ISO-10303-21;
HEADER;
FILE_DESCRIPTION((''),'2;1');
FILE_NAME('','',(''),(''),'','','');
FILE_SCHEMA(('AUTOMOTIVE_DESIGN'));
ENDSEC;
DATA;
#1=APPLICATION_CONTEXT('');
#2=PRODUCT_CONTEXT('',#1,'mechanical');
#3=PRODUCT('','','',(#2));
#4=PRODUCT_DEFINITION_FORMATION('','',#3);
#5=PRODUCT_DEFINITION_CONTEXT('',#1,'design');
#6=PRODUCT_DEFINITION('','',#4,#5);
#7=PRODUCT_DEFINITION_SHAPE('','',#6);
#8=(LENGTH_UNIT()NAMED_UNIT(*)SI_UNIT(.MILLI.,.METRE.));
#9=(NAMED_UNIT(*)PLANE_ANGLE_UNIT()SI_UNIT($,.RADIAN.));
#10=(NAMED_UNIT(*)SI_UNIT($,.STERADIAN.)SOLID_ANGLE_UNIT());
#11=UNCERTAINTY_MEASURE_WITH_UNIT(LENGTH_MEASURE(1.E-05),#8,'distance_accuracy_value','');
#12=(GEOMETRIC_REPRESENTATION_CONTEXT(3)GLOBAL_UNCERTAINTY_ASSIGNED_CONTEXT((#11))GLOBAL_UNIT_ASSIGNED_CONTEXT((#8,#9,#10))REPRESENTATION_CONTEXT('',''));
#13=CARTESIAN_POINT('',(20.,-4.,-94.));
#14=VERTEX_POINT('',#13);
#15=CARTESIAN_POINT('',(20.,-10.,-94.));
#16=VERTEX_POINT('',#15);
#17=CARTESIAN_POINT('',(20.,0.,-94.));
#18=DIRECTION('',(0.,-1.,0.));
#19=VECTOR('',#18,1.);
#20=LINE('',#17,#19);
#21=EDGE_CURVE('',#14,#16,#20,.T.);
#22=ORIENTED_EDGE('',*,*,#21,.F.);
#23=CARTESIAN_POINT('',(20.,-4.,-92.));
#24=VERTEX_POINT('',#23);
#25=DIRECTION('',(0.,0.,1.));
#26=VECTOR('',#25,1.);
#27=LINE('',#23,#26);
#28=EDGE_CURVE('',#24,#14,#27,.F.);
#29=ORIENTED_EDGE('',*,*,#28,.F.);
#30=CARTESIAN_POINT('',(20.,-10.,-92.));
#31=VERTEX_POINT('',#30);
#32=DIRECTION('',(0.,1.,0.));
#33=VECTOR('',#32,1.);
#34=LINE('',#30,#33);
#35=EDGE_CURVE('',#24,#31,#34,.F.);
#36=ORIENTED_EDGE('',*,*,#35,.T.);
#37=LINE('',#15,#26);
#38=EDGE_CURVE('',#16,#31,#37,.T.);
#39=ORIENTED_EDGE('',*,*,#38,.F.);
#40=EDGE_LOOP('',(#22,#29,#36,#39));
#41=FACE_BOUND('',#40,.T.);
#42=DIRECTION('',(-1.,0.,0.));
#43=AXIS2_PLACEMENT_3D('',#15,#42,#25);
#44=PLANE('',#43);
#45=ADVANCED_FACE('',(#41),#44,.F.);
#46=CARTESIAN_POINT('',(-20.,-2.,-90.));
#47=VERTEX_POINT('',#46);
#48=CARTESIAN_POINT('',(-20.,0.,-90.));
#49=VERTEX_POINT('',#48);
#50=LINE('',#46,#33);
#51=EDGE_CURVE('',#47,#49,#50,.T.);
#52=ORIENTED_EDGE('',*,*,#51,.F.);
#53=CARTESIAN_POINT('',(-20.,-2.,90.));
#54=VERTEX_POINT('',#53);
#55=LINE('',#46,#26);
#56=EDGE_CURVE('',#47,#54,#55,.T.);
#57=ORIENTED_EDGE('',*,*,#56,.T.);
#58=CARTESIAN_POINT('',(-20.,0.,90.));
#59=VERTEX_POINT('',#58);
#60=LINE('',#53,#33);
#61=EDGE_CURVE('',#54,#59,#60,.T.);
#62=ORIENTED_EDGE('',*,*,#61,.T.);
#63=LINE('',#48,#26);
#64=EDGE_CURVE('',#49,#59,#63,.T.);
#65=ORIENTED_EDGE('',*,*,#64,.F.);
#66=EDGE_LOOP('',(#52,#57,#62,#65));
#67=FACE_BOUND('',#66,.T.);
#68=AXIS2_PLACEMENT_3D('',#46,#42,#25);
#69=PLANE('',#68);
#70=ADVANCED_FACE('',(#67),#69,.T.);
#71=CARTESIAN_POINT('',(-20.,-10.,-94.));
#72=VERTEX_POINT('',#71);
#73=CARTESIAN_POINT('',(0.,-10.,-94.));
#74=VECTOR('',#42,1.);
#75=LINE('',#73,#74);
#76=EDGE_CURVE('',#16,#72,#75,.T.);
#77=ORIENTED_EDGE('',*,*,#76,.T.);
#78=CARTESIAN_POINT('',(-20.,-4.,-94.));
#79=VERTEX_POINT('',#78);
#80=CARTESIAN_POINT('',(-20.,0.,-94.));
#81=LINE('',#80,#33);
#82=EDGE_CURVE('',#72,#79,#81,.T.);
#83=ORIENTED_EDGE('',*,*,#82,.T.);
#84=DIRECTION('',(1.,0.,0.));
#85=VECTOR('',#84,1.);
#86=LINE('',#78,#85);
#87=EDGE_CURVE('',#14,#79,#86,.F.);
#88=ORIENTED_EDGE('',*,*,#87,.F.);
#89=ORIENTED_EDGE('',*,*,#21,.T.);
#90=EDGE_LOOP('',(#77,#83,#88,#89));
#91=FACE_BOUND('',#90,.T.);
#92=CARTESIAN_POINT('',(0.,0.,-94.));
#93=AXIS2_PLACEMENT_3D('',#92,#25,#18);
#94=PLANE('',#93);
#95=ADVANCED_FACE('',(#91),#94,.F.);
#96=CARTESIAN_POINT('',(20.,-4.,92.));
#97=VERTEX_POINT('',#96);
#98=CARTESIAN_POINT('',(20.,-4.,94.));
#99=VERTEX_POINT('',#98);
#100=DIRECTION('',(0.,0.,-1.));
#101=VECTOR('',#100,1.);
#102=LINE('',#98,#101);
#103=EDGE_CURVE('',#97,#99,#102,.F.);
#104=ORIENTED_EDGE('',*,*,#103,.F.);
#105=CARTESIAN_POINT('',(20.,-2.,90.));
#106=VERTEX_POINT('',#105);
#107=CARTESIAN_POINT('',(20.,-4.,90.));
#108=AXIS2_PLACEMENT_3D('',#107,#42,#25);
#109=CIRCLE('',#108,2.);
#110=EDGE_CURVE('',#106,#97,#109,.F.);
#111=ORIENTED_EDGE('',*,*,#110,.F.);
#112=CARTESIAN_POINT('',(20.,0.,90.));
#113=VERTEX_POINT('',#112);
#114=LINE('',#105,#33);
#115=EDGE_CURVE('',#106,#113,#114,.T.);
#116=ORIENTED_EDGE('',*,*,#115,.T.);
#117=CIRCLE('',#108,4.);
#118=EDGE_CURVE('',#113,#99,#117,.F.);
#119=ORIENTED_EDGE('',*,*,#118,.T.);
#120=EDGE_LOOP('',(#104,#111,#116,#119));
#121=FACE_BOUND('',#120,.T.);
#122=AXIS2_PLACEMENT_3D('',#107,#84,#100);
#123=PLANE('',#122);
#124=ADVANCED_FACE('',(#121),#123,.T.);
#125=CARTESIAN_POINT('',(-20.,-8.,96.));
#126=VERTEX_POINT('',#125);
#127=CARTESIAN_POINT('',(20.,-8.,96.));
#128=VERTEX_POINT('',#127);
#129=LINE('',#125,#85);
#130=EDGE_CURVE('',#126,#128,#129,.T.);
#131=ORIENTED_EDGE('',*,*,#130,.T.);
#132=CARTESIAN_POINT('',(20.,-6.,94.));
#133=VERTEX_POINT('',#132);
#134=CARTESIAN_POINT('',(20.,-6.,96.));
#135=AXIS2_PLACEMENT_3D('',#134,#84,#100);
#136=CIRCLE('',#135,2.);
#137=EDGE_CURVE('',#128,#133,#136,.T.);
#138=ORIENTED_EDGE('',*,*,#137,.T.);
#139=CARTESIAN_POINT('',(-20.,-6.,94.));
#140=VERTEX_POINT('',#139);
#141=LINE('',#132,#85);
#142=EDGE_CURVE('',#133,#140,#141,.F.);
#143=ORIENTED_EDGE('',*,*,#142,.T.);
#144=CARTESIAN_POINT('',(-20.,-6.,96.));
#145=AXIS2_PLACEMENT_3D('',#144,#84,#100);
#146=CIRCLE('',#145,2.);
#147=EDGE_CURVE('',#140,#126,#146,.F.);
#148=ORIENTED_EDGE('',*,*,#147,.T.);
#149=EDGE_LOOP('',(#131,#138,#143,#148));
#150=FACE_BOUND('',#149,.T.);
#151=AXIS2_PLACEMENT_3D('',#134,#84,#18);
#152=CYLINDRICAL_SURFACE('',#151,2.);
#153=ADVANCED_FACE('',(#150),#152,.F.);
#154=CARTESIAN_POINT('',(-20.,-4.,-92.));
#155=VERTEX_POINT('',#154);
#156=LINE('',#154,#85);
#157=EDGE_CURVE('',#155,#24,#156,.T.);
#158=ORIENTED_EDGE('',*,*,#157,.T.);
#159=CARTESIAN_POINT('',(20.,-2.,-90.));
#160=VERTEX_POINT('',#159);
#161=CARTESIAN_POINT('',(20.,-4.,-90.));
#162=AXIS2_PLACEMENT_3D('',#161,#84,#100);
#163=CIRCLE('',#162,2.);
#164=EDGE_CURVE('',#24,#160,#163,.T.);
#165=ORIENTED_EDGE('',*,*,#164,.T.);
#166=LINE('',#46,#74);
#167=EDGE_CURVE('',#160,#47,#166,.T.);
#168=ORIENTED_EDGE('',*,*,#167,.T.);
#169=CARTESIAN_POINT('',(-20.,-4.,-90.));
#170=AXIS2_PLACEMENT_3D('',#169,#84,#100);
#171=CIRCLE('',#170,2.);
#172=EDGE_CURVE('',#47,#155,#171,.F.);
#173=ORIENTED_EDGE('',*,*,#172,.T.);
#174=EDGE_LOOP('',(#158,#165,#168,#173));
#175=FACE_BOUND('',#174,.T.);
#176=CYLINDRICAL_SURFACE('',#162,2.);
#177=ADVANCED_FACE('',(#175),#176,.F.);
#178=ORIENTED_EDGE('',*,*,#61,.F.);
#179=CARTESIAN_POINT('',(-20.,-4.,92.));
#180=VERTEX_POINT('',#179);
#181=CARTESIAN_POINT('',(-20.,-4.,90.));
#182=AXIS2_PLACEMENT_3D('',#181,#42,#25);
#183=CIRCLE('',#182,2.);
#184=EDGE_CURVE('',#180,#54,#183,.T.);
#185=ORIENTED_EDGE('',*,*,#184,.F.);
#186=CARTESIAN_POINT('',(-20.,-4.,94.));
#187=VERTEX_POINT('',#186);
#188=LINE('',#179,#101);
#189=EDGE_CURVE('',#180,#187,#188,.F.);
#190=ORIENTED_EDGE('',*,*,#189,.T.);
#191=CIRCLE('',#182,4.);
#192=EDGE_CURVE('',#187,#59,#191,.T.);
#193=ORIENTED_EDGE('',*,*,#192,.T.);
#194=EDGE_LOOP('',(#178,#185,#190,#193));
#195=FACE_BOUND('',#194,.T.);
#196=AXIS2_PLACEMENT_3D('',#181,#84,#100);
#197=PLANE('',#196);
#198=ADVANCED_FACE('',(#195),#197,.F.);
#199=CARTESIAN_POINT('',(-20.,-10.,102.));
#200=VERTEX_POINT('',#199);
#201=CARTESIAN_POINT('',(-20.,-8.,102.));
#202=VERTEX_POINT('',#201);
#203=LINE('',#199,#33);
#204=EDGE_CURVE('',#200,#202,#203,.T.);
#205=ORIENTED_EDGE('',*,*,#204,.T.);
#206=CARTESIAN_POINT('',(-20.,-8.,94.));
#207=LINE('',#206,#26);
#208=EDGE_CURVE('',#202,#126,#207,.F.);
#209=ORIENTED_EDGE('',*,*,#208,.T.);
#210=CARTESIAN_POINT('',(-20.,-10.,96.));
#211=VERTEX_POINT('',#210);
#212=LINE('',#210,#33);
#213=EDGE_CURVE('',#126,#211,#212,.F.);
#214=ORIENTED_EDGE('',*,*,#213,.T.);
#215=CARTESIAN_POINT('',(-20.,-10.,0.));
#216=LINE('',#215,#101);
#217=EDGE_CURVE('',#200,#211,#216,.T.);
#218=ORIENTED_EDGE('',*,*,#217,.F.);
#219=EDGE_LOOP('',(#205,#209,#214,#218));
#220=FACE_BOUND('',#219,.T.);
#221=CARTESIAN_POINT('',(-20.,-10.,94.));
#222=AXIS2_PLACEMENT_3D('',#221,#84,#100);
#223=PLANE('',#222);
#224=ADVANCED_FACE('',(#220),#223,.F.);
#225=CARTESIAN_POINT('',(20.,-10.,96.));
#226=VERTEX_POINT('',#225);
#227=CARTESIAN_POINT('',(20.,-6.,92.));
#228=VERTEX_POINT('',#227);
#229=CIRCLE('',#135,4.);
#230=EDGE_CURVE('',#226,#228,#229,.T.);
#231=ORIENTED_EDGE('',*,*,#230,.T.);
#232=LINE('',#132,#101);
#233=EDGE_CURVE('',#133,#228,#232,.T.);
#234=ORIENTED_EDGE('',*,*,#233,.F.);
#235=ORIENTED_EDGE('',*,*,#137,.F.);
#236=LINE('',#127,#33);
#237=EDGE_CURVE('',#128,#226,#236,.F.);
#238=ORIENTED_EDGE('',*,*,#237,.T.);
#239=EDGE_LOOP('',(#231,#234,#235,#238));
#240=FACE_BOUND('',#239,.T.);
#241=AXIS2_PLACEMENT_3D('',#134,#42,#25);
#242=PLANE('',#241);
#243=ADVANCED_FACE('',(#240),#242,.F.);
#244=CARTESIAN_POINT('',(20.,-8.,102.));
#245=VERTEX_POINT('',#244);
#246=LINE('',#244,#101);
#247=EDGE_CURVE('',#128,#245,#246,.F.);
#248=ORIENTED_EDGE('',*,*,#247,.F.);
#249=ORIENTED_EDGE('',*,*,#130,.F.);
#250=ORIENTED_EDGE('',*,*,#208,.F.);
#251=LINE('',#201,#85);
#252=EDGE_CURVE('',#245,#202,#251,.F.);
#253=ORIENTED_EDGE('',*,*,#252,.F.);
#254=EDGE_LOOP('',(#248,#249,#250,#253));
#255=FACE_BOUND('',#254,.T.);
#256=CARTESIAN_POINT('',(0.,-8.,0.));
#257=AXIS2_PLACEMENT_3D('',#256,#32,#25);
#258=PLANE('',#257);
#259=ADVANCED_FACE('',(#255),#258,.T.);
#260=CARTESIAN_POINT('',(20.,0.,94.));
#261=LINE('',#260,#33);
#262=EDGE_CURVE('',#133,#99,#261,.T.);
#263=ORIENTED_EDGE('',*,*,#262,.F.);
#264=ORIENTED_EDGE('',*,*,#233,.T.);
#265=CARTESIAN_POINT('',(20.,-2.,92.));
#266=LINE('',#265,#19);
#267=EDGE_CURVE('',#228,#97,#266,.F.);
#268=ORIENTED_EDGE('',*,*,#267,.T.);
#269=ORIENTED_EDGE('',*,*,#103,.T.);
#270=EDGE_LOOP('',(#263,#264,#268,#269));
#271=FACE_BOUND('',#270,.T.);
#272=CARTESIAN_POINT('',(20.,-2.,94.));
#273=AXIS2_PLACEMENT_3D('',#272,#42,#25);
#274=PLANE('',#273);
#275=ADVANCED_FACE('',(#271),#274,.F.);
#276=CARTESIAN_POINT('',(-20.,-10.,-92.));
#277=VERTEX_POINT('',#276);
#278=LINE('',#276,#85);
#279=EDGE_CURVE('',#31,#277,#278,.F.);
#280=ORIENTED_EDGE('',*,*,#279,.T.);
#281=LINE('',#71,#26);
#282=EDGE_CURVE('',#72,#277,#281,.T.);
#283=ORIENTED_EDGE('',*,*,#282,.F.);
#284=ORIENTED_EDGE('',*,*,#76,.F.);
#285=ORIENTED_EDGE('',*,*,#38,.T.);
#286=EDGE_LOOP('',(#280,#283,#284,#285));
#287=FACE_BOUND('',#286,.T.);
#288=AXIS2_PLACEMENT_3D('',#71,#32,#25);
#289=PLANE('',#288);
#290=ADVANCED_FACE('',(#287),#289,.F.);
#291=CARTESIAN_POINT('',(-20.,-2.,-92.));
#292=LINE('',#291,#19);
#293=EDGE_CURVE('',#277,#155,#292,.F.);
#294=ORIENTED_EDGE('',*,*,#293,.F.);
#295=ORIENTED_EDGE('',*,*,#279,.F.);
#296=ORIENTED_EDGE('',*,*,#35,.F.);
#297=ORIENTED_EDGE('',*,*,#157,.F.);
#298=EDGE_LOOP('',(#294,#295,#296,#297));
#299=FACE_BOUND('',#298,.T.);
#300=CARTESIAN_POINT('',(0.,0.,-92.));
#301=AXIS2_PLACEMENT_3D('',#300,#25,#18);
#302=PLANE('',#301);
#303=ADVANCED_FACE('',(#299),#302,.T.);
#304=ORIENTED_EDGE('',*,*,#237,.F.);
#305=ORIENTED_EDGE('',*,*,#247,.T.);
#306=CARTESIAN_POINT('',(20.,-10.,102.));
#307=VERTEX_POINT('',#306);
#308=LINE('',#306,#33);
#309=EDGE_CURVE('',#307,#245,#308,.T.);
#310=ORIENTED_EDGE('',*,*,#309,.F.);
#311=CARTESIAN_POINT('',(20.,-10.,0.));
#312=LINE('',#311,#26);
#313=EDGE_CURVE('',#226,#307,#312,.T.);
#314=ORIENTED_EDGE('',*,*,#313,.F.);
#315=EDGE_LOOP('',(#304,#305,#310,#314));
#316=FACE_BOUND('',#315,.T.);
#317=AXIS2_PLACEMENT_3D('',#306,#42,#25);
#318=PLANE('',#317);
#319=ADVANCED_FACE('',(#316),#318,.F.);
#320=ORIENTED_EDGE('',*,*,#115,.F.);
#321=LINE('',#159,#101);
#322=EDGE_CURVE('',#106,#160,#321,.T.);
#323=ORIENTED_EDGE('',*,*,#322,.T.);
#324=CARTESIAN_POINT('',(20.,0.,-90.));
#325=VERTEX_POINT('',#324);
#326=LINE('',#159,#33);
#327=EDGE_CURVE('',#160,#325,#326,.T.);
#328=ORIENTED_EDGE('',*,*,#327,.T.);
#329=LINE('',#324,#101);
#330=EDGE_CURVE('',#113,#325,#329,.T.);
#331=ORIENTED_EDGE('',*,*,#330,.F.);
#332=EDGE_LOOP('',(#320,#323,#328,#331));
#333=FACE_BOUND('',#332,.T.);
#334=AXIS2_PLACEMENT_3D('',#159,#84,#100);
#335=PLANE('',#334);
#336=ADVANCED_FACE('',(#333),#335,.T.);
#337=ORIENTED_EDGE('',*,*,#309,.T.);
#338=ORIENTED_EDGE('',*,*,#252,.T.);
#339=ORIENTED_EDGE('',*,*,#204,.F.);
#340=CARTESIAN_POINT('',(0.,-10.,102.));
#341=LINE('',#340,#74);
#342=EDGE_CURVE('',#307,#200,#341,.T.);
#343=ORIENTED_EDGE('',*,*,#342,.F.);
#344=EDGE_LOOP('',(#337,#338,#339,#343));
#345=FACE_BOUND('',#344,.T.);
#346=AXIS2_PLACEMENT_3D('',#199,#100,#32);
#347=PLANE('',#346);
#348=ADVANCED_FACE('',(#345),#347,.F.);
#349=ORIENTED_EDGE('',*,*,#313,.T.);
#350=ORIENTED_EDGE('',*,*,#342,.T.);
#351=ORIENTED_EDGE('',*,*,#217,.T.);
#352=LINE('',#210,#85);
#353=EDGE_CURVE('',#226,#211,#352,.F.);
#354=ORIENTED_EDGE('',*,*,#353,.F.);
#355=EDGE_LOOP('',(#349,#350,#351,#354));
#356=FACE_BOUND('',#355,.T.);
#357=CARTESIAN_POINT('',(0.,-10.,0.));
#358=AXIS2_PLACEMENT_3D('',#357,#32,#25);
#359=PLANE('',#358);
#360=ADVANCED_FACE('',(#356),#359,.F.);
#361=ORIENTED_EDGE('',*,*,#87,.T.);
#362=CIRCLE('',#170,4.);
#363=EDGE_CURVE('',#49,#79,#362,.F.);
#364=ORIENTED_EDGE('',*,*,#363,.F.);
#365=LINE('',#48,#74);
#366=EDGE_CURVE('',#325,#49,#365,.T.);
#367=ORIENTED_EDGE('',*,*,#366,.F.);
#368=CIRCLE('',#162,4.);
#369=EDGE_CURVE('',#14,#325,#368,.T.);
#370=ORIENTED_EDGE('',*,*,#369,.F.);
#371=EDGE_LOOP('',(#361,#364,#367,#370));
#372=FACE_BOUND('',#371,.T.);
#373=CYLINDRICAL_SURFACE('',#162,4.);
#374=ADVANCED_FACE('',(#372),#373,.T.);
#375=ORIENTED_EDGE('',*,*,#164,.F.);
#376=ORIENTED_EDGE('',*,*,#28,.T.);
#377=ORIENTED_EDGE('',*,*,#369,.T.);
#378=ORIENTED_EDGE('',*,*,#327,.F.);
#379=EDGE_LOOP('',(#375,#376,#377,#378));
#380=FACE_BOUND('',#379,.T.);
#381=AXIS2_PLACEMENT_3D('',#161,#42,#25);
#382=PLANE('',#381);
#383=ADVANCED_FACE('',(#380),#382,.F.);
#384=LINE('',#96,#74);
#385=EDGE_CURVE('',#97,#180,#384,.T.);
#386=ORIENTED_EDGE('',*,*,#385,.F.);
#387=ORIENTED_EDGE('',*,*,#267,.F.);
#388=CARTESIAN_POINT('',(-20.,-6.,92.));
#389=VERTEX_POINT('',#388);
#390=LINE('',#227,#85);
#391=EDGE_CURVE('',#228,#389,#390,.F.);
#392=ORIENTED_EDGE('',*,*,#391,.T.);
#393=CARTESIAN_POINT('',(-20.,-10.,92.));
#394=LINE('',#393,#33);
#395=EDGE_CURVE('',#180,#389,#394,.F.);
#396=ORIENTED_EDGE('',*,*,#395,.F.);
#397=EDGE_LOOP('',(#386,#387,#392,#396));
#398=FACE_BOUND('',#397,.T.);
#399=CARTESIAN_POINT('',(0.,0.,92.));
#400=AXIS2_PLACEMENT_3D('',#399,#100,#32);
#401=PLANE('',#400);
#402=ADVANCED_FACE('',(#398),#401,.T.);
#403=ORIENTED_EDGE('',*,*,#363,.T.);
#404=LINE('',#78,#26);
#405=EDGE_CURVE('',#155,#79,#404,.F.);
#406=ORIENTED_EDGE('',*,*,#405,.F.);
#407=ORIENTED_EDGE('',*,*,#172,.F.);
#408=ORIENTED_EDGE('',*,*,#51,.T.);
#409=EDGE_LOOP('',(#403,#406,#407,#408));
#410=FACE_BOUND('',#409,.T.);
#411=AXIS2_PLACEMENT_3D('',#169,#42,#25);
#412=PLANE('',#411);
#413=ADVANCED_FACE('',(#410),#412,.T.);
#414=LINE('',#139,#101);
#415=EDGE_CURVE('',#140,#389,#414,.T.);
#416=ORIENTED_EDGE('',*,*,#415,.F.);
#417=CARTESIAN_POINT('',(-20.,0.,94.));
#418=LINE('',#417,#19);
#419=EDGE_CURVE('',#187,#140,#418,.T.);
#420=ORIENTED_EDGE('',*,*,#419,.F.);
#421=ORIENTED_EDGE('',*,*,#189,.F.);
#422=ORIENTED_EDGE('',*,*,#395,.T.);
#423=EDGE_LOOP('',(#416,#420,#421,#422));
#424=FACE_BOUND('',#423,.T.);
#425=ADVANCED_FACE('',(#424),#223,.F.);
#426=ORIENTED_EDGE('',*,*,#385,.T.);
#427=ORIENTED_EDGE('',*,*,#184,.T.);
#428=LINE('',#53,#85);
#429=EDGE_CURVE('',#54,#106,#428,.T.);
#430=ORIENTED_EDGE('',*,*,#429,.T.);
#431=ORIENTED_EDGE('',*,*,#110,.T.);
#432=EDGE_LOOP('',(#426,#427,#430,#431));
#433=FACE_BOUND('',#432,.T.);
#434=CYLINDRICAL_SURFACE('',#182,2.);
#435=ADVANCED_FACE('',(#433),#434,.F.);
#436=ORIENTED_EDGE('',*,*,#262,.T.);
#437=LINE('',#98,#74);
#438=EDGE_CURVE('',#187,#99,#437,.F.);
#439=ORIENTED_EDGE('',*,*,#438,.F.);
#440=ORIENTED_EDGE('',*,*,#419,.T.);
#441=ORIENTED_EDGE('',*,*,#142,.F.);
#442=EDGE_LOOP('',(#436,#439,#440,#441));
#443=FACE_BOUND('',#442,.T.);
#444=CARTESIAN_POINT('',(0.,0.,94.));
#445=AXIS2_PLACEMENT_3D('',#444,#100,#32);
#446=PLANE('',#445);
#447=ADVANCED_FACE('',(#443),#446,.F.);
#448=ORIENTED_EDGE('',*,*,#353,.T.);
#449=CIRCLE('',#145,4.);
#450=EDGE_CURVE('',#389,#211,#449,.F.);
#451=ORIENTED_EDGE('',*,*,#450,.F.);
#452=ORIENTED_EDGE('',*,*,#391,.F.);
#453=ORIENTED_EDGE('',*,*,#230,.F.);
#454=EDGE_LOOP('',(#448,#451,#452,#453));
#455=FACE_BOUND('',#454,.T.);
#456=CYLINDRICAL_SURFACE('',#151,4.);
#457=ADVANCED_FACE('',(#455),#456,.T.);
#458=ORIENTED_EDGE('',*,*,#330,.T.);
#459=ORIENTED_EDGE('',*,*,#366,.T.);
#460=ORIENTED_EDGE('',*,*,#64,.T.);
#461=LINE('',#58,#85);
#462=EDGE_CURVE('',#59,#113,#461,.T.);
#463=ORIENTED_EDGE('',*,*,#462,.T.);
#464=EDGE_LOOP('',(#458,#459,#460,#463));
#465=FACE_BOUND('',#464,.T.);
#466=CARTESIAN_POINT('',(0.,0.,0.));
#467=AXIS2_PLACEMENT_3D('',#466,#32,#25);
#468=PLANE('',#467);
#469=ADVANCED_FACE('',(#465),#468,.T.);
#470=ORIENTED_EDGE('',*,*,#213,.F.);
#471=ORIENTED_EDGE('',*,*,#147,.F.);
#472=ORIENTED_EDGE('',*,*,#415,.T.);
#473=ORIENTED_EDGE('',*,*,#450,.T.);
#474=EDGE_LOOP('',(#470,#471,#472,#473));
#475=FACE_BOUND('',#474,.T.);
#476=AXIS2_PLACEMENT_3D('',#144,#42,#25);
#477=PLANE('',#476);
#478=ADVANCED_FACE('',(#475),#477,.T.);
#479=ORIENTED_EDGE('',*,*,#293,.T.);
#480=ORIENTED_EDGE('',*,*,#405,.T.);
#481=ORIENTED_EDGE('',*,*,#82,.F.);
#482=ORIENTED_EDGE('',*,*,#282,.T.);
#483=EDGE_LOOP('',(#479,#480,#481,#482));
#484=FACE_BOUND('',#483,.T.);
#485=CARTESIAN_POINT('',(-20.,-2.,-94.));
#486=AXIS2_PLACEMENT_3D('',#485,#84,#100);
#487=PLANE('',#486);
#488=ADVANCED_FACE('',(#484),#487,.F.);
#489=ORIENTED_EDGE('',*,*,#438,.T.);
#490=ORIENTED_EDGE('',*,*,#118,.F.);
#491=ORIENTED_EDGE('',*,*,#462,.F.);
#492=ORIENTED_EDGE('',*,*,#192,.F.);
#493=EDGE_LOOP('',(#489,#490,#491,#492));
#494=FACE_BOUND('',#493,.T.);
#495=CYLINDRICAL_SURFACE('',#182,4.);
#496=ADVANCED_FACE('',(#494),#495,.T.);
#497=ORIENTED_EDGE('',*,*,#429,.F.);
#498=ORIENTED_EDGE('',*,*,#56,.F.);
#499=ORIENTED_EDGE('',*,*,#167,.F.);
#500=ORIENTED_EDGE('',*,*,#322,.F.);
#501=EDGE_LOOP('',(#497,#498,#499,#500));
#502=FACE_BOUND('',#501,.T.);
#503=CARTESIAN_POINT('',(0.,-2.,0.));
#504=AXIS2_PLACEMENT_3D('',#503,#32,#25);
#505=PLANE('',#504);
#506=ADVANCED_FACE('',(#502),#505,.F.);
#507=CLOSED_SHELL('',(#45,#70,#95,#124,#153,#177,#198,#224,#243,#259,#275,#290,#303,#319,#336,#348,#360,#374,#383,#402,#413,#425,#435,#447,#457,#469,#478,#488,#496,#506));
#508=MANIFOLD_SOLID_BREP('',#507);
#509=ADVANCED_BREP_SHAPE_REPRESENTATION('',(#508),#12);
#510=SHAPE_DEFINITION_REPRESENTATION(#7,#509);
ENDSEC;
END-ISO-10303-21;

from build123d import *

# Parameters (mm, degrees)
ESBO_O1_W                      = 40
ESBO_O1_H                      = 180
FLANGE_BASE1_DEPTH             = 2
ARESTA_FLANGE1_DEPTH           = 40
ARESTA_FLANGE1_BEND_DEPTH      = 40
ARESTA_FLANGE4_STRIP_W         = 12
ARESTA_FLANGE4_STRIP_H         = 2
ARESTA_FLANGE4_STRIP_CUT_DEPTH = 40
ARESTA_FLANGE4_DEPTH           = 40


# Sheet-metal steps are written as plain solids
with BuildPart() as part:
    # Esboço1 → Flange-base1 (new body)
    with BuildSketch(Plane(origin=(0, 0, 0), x_dir=(1, 0, 0), z_dir=(0, 1, 0))):
        Rectangle(ESBO_O1_W, ESBO_O1_H)
    extrude(amount=-FLANGE_BASE1_DEPTH)

    # Aresta-Flange1 section (across the edge) → Aresta-Flange1 (add)
    with BuildSketch(Plane(origin=(20, -2, 92), x_dir=(0, 0, -1), z_dir=(-1, 0, 0))):
        with BuildLine():
            Line((-2, 2), (-2, 8))
            Line((-2, 8), (0, 8))
            Line((0, 8), (0, 2))
            ThreePointArc((0, 2), (0.585786438, 0.585786438), (2, 0))
            Line((2, 0), (2, -2))
            ThreePointArc((2, -2), (-0.828427125, -0.828427125), (-2, 2))
        make_face()
    extrude(amount=ARESTA_FLANGE1_DEPTH)

    # Aresta-Flange1 section 2 (across the edge) → Aresta-Flange1 bend (add)
    with BuildSketch(Plane(origin=(-20, -2, -92), x_dir=(0, 0, 1), z_dir=(1, 0, 0))):
        with BuildLine():
            Line((-2, 2), (-2, 8))
            Line((-2, 8), (0, 8))
            Line((0, 8), (0, 2))
            ThreePointArc((0, 2), (0.585786438, 0.585786438), (2, 0))
            Line((2, 0), (2, -2))
            ThreePointArc((2, -2), (-0.828427125, -0.828427125), (-2, 2))
        make_face()
    extrude(amount=ARESTA_FLANGE1_BEND_DEPTH)

    # Aresta-Flange4 strip (across the edge) → Aresta-Flange4 strip cut (cut)
    with BuildSketch(Plane(origin=(-20, -10, 94), x_dir=(0, 1, 0), z_dir=(1, 0, 0))):
        with Locations((-2, -1)):
            Rectangle(ARESTA_FLANGE4_STRIP_W, ARESTA_FLANGE4_STRIP_H)
    extrude(amount=ARESTA_FLANGE4_STRIP_CUT_DEPTH, mode=Mode.SUBTRACT)

    # Aresta-Flange4 section (across the edge) → Aresta-Flange4 (add)
    with BuildSketch(Plane(origin=(-20, -10, 94), x_dir=(0, 1, 0), z_dir=(1, 0, 0))):
        with BuildLine():
            Line((0, 2), (0, 8))
            Line((0, 8), (2, 8))
            Line((2, 8), (2, 2))
            ThreePointArc((2, 2), (2.585786438, 0.585786438), (4, 0))
            Line((4, 0), (4, -2))
            ThreePointArc((4, -2), (1.171572875, -0.828427125), (0, 2))
        make_face()
    extrude(amount=ARESTA_FLANGE4_DEPTH)


solid = part.part
